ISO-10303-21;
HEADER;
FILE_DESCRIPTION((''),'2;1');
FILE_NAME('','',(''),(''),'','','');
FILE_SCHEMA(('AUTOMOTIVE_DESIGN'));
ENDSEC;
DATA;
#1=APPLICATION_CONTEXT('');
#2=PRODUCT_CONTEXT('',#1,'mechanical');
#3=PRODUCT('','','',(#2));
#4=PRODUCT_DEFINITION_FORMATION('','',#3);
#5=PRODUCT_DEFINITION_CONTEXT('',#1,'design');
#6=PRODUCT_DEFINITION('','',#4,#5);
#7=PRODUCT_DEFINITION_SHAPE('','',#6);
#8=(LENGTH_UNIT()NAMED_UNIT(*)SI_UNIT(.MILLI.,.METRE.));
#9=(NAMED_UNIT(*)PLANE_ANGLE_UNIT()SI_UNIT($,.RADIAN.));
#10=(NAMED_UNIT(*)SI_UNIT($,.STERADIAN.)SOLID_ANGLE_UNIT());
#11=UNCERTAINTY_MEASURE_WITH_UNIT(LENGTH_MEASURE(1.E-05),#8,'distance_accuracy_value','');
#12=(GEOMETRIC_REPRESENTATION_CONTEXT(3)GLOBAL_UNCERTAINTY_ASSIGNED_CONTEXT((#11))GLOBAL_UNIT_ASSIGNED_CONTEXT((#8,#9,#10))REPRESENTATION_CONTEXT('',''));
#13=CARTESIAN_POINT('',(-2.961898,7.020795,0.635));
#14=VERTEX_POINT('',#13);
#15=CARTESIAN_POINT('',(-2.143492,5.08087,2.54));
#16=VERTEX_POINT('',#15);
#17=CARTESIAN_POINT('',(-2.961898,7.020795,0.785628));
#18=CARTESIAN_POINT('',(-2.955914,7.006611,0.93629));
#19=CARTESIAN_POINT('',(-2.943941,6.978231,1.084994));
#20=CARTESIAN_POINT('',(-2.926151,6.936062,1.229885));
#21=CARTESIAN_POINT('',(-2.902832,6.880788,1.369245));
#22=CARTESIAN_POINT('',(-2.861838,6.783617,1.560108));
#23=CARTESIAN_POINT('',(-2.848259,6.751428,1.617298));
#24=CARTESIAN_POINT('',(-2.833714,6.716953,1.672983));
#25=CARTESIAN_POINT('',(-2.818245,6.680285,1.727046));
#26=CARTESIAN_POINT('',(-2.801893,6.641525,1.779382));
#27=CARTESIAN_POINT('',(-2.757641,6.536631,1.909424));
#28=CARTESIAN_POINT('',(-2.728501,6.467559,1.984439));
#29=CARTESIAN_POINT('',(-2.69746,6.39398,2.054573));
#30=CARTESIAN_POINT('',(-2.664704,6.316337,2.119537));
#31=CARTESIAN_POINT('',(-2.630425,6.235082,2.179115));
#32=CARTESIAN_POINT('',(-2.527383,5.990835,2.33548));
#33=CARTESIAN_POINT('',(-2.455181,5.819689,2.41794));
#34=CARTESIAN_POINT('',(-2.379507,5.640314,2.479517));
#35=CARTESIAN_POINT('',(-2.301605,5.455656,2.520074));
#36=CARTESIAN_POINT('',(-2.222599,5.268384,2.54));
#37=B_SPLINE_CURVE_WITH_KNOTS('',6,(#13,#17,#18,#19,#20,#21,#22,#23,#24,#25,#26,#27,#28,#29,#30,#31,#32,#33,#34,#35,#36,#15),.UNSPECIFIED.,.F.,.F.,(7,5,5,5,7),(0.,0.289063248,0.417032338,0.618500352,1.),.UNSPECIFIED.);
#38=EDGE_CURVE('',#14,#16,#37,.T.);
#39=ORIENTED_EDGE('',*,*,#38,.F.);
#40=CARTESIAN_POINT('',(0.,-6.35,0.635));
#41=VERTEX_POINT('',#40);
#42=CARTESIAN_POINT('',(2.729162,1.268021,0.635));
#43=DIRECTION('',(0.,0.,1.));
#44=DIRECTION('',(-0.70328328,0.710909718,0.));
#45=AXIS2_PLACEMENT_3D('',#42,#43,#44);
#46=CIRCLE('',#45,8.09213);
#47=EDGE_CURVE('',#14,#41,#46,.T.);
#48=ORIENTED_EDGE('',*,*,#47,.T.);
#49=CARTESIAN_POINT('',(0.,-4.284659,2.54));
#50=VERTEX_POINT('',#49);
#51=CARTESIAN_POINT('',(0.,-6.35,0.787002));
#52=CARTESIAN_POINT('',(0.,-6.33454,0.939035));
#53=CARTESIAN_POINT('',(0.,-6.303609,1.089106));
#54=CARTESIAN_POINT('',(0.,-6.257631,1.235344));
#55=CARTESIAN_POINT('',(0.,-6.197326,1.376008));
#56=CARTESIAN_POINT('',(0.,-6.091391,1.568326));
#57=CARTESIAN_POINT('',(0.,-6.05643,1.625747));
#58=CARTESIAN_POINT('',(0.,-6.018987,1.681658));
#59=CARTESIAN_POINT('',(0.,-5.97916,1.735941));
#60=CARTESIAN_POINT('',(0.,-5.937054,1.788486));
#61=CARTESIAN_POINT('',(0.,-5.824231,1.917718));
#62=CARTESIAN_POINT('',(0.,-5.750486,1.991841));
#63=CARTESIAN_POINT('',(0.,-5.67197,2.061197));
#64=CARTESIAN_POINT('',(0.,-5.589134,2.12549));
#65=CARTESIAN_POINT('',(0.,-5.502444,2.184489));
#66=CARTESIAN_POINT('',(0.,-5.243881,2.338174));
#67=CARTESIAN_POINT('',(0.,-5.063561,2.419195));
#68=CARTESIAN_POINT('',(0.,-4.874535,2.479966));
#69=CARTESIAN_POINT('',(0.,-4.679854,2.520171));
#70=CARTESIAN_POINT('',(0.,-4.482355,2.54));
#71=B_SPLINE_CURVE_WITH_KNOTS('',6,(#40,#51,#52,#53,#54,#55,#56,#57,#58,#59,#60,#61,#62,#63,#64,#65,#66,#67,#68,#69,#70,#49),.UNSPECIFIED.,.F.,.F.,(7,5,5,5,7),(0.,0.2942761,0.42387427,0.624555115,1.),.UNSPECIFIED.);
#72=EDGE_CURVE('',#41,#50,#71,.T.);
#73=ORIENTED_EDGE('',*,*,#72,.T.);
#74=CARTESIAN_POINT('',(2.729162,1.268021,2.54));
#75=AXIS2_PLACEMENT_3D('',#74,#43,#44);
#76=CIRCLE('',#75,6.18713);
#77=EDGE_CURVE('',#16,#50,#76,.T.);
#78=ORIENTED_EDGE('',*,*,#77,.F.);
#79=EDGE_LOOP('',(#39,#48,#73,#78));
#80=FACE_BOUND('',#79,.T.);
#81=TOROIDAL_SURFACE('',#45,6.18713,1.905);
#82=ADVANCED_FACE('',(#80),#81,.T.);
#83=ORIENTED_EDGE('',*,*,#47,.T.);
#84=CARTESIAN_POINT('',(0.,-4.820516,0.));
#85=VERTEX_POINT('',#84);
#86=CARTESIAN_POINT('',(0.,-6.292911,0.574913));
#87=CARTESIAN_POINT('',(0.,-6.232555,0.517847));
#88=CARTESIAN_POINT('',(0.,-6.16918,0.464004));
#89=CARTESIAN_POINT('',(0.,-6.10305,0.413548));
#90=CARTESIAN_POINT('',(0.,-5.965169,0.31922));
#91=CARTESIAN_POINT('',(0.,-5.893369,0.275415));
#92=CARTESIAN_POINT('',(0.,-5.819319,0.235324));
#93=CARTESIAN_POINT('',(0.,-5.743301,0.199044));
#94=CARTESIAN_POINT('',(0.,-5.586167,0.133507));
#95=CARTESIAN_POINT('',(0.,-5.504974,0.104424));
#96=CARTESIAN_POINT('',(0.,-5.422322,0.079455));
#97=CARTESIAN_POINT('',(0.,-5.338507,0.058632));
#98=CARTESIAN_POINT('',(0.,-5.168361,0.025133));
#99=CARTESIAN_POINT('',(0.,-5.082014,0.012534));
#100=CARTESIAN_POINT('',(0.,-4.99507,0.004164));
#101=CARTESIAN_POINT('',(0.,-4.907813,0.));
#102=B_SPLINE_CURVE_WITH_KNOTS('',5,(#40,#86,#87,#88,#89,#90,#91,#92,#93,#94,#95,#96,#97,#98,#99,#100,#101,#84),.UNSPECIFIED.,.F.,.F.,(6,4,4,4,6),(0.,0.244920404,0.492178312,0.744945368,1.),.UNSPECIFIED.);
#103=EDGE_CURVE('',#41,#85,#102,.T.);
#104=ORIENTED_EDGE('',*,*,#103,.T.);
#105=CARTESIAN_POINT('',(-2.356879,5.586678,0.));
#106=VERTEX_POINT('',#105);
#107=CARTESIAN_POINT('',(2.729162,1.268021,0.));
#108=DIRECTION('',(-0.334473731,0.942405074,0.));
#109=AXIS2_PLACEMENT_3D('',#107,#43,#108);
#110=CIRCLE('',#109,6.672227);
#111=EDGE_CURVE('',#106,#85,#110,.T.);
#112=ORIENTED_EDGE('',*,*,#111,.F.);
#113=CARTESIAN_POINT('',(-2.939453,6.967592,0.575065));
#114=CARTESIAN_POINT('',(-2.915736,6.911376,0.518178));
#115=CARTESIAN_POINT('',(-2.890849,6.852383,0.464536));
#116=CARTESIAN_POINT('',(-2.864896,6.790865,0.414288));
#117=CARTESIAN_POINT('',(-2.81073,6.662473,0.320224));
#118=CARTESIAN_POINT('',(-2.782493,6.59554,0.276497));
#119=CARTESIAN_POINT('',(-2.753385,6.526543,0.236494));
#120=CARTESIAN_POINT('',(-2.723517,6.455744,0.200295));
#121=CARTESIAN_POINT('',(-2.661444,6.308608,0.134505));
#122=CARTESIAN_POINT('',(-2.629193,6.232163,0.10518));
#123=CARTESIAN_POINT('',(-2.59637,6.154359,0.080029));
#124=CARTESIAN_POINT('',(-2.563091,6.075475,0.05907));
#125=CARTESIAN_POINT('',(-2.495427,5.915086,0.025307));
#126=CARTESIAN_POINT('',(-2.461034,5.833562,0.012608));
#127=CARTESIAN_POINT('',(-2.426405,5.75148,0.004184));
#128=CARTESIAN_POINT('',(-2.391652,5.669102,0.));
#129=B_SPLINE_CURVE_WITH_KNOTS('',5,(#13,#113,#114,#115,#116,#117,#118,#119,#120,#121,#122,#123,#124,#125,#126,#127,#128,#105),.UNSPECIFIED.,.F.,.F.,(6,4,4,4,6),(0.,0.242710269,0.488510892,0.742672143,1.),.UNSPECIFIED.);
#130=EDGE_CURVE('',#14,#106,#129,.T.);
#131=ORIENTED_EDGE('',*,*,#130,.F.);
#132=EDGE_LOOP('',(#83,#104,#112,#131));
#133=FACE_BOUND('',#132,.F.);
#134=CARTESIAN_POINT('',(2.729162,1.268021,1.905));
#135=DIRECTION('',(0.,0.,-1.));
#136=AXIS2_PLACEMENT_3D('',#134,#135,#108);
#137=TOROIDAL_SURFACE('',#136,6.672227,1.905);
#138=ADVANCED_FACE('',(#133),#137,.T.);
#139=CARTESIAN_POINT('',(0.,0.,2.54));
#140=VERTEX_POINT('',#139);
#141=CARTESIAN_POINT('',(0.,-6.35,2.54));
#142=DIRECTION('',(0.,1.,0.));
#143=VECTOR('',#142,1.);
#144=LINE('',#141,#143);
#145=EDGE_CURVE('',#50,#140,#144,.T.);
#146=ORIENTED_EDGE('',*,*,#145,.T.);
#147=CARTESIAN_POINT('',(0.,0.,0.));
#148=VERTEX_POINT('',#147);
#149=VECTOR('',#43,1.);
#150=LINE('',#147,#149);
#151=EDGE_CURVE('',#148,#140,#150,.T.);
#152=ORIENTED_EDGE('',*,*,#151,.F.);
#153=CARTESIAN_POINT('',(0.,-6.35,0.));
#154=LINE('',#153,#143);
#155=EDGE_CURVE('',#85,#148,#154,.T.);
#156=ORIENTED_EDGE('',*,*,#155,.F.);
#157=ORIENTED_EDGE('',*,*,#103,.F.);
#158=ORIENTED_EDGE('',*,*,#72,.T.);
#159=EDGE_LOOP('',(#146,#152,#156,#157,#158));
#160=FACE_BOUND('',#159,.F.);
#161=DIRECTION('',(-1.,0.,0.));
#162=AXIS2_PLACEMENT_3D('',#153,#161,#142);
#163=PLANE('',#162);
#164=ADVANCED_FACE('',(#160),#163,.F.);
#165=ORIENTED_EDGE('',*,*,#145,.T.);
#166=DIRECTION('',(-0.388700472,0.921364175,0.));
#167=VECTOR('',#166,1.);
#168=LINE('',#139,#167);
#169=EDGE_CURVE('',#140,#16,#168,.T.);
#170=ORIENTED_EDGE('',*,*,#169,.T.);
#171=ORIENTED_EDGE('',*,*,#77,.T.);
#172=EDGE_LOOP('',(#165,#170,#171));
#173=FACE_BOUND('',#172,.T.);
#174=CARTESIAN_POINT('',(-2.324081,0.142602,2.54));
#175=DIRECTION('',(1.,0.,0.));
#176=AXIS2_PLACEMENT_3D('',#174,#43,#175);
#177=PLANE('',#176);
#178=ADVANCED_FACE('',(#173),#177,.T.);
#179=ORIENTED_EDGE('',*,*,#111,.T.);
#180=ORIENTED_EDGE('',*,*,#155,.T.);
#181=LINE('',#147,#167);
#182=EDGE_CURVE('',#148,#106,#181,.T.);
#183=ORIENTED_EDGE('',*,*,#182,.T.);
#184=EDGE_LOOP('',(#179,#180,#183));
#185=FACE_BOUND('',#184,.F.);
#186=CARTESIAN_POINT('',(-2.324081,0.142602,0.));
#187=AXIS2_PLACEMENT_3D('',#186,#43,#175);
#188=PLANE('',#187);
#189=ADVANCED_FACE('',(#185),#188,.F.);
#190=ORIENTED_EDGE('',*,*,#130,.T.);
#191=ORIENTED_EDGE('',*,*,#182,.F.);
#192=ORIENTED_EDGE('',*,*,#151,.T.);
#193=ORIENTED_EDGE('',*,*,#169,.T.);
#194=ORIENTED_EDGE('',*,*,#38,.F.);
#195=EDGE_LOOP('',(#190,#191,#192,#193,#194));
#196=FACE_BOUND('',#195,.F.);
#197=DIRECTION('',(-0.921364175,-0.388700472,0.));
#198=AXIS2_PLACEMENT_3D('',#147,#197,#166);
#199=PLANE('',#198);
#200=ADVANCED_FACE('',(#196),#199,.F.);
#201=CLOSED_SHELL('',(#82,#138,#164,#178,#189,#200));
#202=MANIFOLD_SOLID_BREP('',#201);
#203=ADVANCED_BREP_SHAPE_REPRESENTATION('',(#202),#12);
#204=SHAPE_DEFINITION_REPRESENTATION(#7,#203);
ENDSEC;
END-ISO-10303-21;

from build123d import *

# Parameters (mm, degrees)
F1_DEPTH    = 2.54
F2_R        = 1.905
F3_T2_ANGLE = 165.8998366825


# Not quite as in the source:
# - a fillet or chamfer that OpenCascade refuses, or shapes differently, is made with other operations: its cross-section is extruded or revolved along the edge and cut away or added


with BuildPart() as f1:
    # F0 (on Top) → F1 (new body)
    with BuildSketch(Plane.XY):
        with BuildLine():
            Line((0, -6.35), (0, 0))
            Line((0, 0), (-2.9618976002, 7.0207950124))
            ThreePointArc((-2.9618976002, 7.0207950124), (-5.171443726, -0.4821206784), (0, -6.35))
        make_face()
    extrude(amount=F1_DEPTH)

    # F2
    f2_edges = [f1.edges().sort_by_distance(p)[0] for p in [
        (-5.171444, -0.482121, 2.54),
    ]]
    fillet(f2_edges, radius=F2_R)

    # F3: fillet of radius 1.905 on 1 edges, made by hand

    # F3_s1 → F3_t2 (revolve, cut)
    with BuildSketch(Plane(origin=(2.823536152, 1.0021154347, 0), x_dir=(0, 0, 1), z_dir=(0.942405074, 0.3344737307, 0))):
        with BuildLine():
            ThreePointArc((0.635, -8.3742865468), (0.1659808799, -7.7320963745), (0, -6.9543833811))
            Line((0, -6.9543833811), (0, -8.3742865468))
            Line((0, -8.3742865468), (0.635, -8.3742865468))
        make_face()
    revolve(axis=Axis((2.7291622611, 1.2680210216, 0), (0, 0, 1)), revolution_arc=F3_T2_ANGLE, mode=Mode.SUBTRACT)


solid = f1.part
